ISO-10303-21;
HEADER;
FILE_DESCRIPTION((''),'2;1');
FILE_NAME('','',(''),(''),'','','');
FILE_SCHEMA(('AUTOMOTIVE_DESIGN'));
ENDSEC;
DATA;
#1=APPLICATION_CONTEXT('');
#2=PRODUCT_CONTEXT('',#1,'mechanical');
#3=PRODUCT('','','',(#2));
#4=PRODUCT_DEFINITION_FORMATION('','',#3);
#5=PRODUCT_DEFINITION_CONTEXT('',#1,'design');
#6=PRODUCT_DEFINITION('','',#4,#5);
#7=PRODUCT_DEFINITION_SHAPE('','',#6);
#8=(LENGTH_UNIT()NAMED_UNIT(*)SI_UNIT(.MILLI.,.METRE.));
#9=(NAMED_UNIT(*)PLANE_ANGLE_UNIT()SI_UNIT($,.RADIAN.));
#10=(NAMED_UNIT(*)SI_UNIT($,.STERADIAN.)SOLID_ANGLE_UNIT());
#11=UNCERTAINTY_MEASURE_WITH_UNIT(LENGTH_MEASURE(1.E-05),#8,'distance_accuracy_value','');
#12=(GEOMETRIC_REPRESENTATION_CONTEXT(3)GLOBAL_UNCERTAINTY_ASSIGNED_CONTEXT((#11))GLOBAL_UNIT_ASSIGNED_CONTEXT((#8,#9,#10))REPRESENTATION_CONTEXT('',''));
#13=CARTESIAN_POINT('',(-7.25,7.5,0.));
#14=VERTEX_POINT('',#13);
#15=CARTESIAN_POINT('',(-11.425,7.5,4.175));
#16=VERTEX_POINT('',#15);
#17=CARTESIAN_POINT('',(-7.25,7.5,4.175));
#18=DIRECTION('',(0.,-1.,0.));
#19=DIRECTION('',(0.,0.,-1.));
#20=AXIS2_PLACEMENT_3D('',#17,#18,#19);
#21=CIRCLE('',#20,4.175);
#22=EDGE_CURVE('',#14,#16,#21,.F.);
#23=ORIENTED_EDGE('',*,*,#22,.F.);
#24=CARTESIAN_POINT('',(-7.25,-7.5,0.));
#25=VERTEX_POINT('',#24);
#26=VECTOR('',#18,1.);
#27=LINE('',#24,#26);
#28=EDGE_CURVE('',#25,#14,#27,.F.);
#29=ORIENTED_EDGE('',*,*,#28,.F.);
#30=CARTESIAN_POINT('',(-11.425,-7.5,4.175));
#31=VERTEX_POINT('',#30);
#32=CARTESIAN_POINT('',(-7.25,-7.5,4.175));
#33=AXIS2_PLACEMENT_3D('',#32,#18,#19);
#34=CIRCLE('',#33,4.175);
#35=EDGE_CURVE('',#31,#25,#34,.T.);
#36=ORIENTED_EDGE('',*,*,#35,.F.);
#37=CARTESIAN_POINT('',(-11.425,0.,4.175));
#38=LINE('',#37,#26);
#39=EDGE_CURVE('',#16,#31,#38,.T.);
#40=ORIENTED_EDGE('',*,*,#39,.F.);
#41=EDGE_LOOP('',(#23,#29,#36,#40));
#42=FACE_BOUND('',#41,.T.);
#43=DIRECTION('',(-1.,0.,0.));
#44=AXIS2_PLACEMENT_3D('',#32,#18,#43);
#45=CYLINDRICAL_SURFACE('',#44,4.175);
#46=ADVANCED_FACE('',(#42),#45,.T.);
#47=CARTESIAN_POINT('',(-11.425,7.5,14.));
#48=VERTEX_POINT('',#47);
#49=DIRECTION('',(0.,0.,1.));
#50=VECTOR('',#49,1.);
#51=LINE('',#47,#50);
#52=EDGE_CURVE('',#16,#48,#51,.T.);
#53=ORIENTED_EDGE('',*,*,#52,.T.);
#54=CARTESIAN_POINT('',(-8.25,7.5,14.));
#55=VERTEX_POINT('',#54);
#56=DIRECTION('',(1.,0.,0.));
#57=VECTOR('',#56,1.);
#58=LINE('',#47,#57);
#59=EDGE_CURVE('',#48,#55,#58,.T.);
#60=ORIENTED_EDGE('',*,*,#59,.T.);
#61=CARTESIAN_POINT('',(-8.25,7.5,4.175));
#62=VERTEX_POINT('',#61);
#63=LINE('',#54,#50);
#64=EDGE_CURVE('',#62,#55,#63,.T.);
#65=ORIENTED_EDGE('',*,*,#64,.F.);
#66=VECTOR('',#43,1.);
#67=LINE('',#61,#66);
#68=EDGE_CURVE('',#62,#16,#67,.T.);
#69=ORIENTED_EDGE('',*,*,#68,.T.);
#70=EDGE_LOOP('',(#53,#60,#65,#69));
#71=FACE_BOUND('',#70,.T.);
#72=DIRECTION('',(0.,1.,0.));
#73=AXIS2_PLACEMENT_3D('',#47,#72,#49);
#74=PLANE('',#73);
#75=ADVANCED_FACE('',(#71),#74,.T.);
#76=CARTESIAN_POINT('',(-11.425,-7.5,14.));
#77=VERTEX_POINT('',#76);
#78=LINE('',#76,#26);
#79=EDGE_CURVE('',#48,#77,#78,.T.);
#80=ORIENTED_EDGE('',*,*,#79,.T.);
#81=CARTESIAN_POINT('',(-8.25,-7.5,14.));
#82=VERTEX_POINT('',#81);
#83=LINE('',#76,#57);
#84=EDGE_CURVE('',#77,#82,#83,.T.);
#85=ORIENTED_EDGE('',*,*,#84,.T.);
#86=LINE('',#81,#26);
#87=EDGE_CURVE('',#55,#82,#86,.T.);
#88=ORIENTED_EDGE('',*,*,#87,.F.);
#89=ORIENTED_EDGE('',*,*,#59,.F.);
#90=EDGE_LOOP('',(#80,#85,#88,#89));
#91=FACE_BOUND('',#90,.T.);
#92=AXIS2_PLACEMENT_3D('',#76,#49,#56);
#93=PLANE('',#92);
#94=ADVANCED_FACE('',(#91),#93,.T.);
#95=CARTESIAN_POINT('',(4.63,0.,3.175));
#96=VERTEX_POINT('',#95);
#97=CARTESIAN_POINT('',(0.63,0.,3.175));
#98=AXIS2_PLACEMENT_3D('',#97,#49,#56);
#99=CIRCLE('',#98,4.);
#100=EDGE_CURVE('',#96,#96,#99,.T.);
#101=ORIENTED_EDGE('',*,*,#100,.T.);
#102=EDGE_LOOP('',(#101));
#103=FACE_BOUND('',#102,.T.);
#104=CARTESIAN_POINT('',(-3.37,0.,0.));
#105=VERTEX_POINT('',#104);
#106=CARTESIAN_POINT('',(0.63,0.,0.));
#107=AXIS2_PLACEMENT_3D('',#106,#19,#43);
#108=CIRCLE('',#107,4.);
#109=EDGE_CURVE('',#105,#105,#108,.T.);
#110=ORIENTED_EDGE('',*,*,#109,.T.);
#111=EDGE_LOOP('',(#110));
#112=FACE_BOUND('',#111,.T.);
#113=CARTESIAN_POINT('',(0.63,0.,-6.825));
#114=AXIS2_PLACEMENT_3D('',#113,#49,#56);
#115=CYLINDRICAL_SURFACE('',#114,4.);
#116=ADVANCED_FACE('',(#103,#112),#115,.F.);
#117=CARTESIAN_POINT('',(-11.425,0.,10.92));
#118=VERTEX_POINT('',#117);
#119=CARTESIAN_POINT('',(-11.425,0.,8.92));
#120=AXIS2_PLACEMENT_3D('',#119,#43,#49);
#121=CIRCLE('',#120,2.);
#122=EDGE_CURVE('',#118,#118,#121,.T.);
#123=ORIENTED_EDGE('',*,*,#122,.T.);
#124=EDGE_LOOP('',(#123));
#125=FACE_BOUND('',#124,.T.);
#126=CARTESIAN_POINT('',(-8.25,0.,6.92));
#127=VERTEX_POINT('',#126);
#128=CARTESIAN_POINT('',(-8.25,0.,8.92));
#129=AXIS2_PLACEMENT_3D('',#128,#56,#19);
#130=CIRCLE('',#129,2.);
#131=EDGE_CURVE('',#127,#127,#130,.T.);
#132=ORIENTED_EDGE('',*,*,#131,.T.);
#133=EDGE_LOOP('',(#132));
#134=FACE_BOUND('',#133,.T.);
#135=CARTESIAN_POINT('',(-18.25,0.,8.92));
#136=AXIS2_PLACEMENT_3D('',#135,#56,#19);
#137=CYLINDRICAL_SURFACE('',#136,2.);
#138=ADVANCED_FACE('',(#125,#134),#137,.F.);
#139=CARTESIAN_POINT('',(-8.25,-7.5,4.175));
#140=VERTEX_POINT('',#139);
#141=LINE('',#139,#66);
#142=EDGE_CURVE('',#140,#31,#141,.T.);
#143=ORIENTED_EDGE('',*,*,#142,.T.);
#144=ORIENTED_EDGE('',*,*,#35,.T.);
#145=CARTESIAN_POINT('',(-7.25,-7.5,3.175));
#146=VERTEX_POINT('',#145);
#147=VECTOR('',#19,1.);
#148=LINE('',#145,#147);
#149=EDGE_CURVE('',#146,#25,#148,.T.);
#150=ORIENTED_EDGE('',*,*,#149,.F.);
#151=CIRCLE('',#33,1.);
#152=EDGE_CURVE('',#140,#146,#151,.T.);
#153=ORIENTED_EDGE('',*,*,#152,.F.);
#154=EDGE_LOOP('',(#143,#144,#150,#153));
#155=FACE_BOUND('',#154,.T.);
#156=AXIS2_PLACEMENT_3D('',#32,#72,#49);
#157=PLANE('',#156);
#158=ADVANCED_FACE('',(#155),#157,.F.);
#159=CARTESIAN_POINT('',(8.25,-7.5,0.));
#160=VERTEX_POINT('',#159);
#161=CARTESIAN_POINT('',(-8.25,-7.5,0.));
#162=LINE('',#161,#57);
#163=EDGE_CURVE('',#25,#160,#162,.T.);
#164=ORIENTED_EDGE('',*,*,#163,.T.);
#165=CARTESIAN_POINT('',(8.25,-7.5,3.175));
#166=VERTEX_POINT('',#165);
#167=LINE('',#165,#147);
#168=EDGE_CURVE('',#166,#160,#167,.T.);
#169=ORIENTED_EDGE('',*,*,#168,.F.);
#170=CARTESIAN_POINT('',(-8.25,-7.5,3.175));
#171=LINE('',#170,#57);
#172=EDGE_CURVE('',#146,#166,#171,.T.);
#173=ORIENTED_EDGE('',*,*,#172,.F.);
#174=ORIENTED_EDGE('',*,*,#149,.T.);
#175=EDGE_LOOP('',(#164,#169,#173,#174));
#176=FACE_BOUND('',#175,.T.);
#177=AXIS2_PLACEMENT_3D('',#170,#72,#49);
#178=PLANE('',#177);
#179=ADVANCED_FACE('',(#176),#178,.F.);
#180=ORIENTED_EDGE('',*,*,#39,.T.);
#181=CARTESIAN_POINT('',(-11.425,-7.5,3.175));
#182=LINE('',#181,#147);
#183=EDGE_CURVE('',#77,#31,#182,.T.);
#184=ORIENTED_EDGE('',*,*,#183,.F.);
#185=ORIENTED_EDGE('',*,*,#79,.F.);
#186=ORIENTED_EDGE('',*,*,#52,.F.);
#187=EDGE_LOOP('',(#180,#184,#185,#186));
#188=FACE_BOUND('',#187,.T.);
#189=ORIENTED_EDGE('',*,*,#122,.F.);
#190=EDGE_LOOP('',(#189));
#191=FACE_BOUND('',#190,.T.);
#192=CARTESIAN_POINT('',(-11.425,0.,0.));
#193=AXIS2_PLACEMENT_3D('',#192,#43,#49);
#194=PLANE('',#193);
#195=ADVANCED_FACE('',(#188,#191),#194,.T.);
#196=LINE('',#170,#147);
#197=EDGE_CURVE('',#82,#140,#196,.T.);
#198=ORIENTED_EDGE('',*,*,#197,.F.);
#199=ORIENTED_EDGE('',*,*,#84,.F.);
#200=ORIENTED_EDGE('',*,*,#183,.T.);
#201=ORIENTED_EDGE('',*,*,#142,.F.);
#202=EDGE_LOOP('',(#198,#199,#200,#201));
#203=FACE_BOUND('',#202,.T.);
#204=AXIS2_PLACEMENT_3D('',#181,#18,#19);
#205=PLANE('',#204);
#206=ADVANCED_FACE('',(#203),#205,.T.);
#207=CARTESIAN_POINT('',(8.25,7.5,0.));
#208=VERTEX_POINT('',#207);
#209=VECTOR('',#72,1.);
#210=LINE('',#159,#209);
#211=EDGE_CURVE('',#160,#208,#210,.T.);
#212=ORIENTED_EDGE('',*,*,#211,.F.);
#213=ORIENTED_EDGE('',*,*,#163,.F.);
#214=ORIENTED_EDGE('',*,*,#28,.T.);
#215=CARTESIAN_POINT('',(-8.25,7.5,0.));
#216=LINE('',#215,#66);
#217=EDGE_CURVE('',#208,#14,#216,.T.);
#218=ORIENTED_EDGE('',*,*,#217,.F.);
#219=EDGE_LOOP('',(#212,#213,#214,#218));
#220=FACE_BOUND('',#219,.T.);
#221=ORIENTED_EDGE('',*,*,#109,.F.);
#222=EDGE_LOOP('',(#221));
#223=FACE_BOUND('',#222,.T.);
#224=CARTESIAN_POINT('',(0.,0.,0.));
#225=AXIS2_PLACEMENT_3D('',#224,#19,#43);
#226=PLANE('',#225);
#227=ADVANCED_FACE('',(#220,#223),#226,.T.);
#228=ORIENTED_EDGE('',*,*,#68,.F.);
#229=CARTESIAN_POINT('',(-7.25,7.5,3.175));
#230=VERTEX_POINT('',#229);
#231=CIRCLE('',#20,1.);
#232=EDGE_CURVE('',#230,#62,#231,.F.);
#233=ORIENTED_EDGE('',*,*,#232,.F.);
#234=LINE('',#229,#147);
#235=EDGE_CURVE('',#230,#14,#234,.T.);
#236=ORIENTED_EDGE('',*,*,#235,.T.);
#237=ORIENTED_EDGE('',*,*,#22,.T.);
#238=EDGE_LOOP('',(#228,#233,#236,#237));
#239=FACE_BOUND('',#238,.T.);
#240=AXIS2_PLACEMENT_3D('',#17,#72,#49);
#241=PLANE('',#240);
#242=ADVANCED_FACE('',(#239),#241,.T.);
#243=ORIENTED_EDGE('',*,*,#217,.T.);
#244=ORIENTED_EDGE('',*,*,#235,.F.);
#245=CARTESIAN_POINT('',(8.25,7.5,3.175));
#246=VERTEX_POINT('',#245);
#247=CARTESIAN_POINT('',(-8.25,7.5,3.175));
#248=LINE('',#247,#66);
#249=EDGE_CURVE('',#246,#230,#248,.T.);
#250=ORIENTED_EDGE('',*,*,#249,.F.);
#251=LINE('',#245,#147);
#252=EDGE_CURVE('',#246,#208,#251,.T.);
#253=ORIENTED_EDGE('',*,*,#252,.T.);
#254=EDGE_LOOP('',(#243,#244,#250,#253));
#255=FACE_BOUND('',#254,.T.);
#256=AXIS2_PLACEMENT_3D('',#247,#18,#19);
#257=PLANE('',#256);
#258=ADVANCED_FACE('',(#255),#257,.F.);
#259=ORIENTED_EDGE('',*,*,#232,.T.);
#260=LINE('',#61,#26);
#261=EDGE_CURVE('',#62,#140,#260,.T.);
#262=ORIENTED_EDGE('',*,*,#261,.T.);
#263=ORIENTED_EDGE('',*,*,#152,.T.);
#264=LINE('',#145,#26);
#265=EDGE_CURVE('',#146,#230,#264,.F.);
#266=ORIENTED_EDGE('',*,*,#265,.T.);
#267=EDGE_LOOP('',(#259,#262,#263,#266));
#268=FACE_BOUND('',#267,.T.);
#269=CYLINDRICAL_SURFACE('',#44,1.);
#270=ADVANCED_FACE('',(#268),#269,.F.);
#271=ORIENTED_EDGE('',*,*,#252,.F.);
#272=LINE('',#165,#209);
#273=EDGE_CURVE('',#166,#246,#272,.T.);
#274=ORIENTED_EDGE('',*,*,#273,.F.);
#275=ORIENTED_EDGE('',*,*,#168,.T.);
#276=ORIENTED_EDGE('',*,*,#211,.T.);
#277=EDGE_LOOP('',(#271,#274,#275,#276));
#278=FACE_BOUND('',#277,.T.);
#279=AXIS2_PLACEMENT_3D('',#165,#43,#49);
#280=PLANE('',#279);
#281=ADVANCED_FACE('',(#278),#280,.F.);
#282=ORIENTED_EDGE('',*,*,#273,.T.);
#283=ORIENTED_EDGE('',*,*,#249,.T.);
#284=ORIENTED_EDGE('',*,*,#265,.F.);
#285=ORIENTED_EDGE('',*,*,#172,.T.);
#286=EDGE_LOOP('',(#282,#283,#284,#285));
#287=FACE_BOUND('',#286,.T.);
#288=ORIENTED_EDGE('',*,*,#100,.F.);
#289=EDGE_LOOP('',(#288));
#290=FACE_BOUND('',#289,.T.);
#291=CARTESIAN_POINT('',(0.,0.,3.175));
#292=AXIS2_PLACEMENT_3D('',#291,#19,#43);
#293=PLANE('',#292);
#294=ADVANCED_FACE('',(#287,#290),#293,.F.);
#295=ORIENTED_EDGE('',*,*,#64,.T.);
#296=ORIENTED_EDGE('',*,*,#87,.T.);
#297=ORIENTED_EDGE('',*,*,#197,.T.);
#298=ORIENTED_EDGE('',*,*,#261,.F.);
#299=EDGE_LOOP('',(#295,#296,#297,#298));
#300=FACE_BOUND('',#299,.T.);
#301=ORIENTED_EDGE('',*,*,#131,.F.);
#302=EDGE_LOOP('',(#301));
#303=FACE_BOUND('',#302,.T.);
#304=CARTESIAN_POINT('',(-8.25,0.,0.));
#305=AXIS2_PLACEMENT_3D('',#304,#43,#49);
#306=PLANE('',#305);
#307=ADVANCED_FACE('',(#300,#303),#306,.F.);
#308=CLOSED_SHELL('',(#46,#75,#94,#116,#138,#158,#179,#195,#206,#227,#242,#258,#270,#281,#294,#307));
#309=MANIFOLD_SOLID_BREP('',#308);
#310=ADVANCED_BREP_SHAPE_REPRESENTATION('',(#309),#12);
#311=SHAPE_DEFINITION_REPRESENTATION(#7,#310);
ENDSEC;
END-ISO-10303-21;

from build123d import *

# Parameters (mm, degrees)
SKETCH1_W                    = 16.5
SKETCH1_H                    = 15
BASE_FLANGE1_DEPTH           = 3.175
EDGE_FLANGE1_STRIP_W         = 14.7
EDGE_FLANGE1_STRIP_H         = 3.175
EDGE_FLANGE1_STRIP_CUT_DEPTH = 15
EDGE_FLANGE1_DEPTH           = 15
SKETCH9_R                    = 4
CUT_EXTRUDE1_DEPTH           = 10
SKETCH10_R                   = 2
CUT_EXTRUDE2_DEPTH           = 10


# Sheet-metal steps are written as plain solids
with BuildPart() as part:
    # Sketch1 → Base-Flange1 (new body)
    with BuildSketch(Plane.XY):
        Rectangle(SKETCH1_W, SKETCH1_H)
    extrude(amount=BASE_FLANGE1_DEPTH)

    # Edge-Flange1 strip (across the edge) → Edge-Flange1 strip cut (cut)
    with BuildSketch(Plane(origin=(-8.25, 7.5, 3.175), x_dir=(1, 0, 0), z_dir=(0, -1, 0))):
        with Locations((-6.35, -1.5875)):
            Rectangle(EDGE_FLANGE1_STRIP_W, EDGE_FLANGE1_STRIP_H)
    extrude(amount=EDGE_FLANGE1_STRIP_CUT_DEPTH, mode=Mode.SUBTRACT)

    # Edge-Flange1 section (across the edge) → Edge-Flange1 (add)
    with BuildSketch(Plane(origin=(-8.25, 7.5, 3.175), x_dir=(1, 0, 0), z_dir=(0, -1, 0))):
        with BuildLine():
            Line((-3.175, 1), (-3.175, 10.825))
            Line((-3.175, 10.825), (0, 10.825))
            Line((0, 10.825), (0, 1))
            ThreePointArc((0, 1), (0.292893219, 0.292893219), (1, 0))
            Line((1, 0), (1, -3.175))
            ThreePointArc((1, -3.175), (-1.952170811, -1.952170811), (-3.175, 1))
        make_face()
    extrude(amount=EDGE_FLANGE1_DEPTH)

    # Sketch9 → Cut-Extrude1 (cut)
    with BuildSketch(Plane.XY.offset(3.175)):
        with Locations((0.63, 0)):
            Circle(SKETCH9_R)
    extrude(amount=-CUT_EXTRUDE1_DEPTH, mode=Mode.SUBTRACT)

    # Sketch10 → Cut-Extrude2 (cut)
    with BuildSketch(Plane(origin=(-8.25, 0, 0), x_dir=(0, 0, -1), z_dir=(1, 0, 0))):
        with Locations((-8.92, 0)):
            Circle(SKETCH10_R)
    extrude(amount=-CUT_EXTRUDE2_DEPTH, mode=Mode.SUBTRACT)


solid = part.part
